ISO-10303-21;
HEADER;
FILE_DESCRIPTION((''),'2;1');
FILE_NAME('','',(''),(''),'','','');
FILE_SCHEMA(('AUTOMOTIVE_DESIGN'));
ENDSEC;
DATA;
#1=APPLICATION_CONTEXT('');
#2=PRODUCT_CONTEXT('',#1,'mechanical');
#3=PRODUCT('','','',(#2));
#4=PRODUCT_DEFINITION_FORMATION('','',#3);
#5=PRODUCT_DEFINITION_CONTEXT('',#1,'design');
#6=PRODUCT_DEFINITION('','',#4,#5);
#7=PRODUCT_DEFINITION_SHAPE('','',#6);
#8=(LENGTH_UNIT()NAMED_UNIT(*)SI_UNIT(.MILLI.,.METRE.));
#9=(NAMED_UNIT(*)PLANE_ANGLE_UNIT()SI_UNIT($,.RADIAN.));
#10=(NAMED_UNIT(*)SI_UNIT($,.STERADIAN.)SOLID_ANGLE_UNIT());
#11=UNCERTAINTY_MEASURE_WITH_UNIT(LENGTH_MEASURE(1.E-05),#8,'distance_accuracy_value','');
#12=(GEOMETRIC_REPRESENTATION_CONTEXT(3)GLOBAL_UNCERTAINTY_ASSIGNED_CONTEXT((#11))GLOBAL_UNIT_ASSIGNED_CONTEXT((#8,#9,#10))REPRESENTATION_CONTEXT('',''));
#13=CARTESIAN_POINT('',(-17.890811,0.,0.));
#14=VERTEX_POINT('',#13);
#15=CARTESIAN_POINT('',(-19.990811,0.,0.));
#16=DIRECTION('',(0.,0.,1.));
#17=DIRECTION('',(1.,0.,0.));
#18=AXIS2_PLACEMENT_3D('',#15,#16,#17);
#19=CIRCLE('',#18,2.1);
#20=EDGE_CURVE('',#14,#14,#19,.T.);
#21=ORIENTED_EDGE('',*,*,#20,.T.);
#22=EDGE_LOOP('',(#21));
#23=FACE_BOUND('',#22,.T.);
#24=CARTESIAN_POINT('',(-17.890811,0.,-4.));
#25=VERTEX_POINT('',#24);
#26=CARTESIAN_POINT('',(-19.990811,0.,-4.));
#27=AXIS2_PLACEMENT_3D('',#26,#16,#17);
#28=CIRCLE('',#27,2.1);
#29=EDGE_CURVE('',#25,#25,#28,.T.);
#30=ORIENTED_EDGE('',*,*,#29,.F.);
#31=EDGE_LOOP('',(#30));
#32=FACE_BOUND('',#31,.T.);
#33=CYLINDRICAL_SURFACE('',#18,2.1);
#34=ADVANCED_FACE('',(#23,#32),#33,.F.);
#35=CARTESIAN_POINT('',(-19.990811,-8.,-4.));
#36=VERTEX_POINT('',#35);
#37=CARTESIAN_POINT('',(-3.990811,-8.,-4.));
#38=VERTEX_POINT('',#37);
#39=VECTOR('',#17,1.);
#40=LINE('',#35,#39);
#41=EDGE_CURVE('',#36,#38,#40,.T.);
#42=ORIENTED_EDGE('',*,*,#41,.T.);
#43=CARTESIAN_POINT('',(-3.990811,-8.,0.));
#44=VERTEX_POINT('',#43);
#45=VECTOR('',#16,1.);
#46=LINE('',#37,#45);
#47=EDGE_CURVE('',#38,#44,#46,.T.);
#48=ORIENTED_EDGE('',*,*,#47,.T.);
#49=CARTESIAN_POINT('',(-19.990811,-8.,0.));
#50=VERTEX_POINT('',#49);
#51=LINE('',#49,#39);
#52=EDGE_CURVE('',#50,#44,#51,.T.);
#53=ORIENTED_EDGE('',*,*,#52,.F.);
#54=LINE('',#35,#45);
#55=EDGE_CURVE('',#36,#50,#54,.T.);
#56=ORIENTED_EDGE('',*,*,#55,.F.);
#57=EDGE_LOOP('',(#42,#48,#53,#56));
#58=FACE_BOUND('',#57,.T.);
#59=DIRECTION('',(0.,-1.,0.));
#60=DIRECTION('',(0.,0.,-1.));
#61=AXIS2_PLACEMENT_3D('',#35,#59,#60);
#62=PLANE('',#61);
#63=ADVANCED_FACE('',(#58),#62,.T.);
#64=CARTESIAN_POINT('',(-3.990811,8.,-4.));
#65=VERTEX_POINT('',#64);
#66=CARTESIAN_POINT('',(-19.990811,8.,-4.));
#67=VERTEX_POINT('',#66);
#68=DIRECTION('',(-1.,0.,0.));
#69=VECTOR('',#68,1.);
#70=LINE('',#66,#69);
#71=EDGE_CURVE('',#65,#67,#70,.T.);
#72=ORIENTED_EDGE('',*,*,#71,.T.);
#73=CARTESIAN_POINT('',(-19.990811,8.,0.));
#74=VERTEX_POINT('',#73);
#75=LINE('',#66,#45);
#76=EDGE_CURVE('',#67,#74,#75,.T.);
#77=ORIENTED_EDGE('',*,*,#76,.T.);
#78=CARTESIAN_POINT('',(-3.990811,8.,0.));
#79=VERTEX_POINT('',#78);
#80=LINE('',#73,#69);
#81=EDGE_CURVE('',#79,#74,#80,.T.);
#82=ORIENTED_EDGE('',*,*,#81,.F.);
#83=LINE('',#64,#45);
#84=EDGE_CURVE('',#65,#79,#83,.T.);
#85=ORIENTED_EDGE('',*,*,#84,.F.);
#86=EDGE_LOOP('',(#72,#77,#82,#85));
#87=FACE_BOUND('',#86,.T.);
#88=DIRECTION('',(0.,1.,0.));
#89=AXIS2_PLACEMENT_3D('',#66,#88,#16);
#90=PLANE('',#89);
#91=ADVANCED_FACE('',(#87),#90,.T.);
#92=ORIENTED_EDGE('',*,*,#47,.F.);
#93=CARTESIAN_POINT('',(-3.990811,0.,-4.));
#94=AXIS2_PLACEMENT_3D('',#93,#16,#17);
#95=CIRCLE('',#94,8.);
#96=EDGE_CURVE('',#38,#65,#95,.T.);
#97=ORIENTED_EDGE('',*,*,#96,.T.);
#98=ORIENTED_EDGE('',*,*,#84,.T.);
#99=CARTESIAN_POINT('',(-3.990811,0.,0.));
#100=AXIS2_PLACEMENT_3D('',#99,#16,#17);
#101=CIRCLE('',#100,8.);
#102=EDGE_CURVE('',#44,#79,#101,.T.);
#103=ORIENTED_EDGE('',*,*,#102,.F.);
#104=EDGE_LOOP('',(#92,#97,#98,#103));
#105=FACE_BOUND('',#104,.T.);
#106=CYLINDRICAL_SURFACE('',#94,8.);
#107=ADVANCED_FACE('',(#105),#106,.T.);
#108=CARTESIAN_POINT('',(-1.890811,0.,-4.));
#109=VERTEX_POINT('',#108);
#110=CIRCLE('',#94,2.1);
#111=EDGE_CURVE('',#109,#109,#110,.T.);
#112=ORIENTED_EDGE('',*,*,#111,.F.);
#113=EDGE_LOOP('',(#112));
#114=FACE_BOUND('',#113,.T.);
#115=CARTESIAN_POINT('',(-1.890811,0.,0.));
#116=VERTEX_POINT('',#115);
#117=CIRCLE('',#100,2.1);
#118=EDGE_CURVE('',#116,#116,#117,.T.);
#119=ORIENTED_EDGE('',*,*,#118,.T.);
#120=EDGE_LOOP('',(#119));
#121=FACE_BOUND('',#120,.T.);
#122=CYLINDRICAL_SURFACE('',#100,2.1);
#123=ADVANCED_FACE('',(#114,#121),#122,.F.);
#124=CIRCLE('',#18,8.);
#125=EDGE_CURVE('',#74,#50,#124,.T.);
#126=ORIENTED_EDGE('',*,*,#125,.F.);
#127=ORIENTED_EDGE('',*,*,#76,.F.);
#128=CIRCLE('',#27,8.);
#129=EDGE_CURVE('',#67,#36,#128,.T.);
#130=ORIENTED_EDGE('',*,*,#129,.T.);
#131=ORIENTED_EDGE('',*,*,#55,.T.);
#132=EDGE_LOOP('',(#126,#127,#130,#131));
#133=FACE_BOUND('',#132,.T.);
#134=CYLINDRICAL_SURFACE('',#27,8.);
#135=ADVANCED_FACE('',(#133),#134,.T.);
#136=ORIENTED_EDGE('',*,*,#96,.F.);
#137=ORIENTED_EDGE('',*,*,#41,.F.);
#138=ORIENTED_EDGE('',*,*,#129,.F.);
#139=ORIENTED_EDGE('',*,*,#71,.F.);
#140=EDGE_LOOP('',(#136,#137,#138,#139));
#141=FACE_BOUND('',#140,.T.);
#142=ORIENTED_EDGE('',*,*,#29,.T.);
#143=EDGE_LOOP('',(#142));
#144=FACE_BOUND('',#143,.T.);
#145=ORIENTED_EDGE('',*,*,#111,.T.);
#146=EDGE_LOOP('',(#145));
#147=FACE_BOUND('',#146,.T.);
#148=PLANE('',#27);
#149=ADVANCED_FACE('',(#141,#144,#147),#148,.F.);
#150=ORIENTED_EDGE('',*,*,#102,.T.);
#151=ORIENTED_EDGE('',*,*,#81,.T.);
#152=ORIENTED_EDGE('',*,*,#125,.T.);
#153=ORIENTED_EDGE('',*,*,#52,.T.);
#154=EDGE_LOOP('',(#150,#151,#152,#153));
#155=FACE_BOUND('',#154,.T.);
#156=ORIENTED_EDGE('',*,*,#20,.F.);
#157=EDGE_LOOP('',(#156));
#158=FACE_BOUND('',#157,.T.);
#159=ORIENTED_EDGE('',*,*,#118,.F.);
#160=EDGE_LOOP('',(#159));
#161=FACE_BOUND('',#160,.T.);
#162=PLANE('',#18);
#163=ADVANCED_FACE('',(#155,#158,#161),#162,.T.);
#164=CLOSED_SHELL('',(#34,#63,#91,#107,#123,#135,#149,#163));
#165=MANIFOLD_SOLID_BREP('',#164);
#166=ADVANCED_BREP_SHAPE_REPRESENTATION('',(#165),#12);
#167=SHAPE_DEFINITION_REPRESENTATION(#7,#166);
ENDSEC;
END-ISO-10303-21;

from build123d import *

# Parameters (mm, degrees)
BRIDA_BASE1_DEPTH         = 4
TALADRO_ROSCADO_M51_D     = 4.2
TALADRO_ROSCADO_M51_DEPTH = 14
TALADRO_ROSCADO_M51_TIP   = 1.2618073


# Sheet-metal steps are written as plain solids
with BuildPart() as part:
    # Croquis1 → Brida base1 (new body)
    with BuildSketch(Plane.XY):
        with BuildLine():
            Line((-19.990811444, 8), (-3.990811444, 8))
            ThreePointArc((-3.990811444, 8), (4.009188556, 0), (-3.990811444, -8))
            Line((-3.990811444, -8), (-19.990811444, -8))
            ThreePointArc((-19.990811444, -8), (-27.990811444, 0), (-19.990811444, 8))
        make_face()
    extrude(amount=-BRIDA_BASE1_DEPTH)

    # Taladro roscado M51
    with Locations(Plane.XY):
        with Locations((-19.990811444, 0), (-3.990811444, 0)):
            Hole(TALADRO_ROSCADO_M51_D / 2, depth=TALADRO_ROSCADO_M51_DEPTH)
            with Locations((0, 0, -(TALADRO_ROSCADO_M51_DEPTH + TALADRO_ROSCADO_M51_TIP / 2))):  # 118° drill point
                Cone(0, TALADRO_ROSCADO_M51_D / 2, TALADRO_ROSCADO_M51_TIP, mode=Mode.SUBTRACT)


solid = part.part
